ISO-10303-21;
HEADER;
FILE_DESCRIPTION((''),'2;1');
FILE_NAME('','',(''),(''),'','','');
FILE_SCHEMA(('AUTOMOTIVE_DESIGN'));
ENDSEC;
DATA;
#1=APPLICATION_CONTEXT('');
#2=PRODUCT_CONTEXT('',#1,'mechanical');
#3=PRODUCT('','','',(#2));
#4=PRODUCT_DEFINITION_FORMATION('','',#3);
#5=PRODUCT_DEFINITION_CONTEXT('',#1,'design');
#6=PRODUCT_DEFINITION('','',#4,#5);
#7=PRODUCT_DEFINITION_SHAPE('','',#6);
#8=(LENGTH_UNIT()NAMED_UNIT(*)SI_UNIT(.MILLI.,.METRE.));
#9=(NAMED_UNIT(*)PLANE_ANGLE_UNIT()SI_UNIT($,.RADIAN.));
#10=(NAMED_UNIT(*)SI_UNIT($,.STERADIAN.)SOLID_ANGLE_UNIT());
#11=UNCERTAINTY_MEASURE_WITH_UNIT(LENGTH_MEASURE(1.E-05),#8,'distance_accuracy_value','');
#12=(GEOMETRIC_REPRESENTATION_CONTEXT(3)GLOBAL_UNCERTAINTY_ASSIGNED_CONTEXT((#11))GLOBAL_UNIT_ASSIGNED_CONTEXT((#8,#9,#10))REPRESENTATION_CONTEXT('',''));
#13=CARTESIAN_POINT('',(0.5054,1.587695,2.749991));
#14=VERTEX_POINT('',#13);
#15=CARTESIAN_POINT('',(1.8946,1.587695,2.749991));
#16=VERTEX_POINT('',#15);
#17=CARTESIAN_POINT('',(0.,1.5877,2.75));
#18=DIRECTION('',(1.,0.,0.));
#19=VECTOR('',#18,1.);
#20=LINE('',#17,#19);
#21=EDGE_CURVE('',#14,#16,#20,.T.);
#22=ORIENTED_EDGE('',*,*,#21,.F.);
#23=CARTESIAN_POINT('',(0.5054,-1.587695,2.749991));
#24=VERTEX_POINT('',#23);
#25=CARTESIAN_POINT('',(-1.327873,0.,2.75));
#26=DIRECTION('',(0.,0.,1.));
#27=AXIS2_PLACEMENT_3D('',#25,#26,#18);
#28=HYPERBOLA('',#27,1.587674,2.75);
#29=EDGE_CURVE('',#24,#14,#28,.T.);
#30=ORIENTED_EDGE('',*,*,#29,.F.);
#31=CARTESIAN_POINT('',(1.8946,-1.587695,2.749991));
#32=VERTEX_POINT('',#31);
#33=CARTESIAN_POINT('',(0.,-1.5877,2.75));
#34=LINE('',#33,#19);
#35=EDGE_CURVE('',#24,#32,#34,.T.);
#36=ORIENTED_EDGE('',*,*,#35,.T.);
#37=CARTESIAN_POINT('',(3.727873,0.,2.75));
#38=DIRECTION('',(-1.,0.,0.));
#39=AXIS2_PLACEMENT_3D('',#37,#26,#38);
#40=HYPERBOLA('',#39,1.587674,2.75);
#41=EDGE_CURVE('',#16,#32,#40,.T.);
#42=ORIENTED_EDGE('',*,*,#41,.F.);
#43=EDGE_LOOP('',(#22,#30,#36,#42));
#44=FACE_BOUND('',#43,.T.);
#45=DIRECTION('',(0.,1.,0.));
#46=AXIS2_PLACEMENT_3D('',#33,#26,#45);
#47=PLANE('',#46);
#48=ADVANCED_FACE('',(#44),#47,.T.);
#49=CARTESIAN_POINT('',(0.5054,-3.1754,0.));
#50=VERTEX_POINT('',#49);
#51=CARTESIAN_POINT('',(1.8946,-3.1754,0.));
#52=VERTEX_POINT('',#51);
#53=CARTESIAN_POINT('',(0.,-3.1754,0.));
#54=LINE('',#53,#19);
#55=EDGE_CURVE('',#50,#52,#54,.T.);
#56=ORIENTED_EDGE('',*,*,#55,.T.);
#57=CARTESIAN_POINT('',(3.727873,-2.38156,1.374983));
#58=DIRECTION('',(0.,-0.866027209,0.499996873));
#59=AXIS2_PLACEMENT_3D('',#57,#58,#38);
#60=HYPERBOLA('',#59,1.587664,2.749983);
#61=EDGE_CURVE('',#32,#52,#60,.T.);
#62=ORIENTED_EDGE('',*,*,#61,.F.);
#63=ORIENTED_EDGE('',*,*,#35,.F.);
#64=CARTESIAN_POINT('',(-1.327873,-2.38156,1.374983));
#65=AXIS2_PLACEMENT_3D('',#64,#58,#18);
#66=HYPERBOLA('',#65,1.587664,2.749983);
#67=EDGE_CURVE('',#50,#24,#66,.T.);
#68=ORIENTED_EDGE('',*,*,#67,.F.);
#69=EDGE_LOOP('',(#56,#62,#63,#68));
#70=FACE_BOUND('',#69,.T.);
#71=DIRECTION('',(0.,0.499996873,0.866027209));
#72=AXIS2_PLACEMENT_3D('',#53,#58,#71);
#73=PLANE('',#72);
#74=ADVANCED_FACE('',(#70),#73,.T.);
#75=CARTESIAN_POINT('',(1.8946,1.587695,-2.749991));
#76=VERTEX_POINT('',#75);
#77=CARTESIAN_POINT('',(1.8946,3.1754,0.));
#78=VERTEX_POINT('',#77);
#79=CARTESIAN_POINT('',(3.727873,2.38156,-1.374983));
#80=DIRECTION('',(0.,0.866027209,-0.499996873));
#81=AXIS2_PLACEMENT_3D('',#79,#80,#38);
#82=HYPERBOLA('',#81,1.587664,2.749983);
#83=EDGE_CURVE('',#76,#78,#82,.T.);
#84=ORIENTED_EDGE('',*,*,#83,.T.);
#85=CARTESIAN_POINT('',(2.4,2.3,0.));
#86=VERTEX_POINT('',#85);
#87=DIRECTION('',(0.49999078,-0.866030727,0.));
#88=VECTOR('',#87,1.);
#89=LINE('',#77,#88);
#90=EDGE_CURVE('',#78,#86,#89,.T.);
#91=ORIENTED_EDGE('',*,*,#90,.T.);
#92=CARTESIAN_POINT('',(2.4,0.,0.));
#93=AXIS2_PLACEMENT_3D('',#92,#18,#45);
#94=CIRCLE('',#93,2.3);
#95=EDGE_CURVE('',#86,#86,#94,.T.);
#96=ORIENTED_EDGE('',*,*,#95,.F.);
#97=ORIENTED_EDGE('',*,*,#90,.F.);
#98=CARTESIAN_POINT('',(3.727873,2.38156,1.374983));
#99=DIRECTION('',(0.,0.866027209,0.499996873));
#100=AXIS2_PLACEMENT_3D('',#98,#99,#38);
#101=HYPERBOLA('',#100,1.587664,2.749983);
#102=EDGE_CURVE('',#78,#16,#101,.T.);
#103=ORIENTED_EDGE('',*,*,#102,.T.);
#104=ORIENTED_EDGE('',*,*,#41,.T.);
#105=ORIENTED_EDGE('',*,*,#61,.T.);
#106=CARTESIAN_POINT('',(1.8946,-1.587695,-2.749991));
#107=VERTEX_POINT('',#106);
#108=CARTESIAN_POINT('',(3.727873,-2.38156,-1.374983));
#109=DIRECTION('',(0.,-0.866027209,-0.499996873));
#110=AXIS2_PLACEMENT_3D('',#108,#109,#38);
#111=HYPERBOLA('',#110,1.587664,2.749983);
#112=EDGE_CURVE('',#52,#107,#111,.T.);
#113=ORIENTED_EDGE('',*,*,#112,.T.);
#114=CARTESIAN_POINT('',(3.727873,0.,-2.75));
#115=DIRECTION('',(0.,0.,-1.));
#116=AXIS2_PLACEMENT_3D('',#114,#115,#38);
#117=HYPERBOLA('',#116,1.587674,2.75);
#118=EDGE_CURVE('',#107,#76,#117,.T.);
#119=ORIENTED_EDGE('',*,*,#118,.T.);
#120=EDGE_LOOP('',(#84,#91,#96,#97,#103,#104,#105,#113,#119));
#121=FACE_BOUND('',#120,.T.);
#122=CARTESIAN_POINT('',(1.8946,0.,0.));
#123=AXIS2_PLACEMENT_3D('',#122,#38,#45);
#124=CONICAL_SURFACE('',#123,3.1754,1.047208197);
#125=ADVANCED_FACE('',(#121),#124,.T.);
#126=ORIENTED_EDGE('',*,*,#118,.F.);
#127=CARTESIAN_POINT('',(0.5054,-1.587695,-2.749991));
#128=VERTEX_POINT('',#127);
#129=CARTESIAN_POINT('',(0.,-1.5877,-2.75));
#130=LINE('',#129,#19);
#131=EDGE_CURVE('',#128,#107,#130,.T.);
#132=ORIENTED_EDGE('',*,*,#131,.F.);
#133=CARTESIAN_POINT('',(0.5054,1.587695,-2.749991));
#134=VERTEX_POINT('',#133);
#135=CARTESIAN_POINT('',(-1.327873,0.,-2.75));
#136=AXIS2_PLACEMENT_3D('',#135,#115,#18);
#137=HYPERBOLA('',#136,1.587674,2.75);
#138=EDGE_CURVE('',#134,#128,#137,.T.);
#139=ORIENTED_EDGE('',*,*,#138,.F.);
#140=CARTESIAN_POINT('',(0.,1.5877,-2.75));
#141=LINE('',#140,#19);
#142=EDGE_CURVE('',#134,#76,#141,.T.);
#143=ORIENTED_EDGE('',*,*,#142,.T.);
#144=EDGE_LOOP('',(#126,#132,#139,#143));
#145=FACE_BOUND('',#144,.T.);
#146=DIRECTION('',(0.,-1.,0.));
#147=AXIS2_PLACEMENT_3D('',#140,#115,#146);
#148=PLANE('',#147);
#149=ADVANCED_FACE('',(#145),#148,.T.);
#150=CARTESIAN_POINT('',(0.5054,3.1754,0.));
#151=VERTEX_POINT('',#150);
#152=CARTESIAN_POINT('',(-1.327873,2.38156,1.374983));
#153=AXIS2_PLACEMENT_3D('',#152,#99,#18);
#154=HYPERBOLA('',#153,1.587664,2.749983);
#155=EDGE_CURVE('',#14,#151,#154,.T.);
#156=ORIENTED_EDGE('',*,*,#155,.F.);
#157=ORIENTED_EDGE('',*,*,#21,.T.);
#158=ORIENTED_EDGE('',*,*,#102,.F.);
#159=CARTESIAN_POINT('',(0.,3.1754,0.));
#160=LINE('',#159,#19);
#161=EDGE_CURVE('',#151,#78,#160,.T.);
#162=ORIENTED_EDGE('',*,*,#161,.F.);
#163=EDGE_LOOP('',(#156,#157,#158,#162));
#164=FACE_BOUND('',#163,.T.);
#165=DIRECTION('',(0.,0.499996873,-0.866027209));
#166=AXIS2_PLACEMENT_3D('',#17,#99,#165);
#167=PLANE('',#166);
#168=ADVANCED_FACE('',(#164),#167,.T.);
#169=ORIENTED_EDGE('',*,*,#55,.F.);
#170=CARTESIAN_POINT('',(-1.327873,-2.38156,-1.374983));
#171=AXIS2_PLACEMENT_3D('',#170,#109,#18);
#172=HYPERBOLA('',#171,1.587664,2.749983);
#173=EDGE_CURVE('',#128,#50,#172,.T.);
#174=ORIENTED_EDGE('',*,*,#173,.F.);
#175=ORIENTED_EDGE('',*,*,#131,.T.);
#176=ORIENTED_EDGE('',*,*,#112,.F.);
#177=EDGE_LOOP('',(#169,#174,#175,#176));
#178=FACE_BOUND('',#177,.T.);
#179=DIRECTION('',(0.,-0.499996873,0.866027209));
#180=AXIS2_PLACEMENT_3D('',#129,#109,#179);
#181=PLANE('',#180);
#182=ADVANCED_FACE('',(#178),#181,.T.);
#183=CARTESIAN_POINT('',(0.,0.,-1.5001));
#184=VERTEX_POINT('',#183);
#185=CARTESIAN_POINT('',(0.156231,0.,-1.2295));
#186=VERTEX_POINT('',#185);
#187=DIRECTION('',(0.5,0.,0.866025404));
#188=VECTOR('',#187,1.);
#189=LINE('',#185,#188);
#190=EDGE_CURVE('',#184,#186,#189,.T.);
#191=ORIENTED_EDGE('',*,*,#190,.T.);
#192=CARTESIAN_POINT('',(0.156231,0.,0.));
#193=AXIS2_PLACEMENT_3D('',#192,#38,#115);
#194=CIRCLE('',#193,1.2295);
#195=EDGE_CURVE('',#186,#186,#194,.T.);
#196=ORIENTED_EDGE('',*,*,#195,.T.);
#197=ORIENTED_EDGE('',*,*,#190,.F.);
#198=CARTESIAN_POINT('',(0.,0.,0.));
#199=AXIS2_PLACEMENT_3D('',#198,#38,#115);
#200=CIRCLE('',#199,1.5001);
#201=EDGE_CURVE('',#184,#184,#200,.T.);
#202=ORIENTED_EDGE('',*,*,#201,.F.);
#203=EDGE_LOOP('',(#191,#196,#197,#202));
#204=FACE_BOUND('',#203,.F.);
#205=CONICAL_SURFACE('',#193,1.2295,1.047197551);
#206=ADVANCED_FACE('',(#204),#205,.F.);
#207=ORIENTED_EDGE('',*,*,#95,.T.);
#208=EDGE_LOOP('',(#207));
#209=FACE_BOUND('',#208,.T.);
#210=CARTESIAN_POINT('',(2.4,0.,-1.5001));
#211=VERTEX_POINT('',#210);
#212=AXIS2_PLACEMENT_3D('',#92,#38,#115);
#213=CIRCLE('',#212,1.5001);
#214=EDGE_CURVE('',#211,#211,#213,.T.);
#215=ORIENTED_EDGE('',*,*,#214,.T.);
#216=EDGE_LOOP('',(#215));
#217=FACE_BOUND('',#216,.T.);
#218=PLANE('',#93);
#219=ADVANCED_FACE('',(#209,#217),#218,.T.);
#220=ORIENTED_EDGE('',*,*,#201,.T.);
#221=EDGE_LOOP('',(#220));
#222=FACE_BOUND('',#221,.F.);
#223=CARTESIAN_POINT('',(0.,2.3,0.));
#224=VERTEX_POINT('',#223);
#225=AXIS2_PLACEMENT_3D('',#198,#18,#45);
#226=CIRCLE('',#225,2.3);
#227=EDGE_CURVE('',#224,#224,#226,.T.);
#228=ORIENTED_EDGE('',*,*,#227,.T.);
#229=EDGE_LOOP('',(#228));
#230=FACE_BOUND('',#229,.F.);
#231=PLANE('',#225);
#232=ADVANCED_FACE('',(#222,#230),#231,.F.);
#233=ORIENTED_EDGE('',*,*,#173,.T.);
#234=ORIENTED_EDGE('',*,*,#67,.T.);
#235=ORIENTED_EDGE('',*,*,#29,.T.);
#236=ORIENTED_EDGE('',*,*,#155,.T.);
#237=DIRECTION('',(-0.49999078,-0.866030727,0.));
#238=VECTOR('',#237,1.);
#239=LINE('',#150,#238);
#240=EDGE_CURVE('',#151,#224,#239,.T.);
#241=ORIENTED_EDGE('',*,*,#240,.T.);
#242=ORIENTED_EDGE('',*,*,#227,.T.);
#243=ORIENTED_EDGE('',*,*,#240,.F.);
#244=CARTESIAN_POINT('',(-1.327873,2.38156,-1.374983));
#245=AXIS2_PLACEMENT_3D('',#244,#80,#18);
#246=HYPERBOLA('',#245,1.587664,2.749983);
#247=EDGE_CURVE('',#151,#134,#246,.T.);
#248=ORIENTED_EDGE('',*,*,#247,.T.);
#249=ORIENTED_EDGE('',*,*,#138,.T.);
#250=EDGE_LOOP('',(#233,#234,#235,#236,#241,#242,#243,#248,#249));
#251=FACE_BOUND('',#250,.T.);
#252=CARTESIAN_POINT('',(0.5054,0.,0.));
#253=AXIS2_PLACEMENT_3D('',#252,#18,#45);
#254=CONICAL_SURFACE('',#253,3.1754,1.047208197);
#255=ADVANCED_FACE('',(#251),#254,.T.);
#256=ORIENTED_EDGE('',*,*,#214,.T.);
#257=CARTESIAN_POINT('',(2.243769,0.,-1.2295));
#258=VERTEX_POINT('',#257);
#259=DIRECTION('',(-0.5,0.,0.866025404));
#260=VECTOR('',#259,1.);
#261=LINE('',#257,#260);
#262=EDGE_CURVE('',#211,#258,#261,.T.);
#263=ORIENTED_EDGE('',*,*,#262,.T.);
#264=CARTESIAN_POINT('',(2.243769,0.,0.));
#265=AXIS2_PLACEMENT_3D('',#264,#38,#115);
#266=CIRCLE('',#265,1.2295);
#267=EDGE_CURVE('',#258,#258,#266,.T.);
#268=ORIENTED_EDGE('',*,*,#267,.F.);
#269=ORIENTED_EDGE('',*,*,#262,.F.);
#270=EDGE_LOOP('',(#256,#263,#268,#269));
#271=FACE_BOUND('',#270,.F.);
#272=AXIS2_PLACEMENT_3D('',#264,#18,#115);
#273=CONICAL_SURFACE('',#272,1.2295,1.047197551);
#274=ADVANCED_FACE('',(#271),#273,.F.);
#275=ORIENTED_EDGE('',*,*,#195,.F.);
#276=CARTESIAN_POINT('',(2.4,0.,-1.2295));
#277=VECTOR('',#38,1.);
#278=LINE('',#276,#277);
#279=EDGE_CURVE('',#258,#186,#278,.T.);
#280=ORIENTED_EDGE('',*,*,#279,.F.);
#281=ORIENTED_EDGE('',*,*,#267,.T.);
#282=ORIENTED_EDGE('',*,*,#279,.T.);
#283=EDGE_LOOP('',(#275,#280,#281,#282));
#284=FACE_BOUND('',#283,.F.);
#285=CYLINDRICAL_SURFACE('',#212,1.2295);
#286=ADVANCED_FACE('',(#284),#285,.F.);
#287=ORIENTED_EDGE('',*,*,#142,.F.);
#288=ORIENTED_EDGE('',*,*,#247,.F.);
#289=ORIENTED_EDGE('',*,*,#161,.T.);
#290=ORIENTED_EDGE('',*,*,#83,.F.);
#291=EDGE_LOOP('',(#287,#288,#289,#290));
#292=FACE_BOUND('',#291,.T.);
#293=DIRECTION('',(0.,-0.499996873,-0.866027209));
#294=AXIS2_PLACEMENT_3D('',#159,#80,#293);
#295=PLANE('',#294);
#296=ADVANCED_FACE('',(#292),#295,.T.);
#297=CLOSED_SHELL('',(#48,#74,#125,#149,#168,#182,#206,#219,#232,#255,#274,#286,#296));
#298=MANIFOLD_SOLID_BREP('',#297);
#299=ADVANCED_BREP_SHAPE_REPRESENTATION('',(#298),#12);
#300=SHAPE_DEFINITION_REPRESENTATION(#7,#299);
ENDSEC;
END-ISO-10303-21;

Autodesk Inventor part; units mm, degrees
ref_plane "YZ Plane" through (0, 0, 0) normal (1, 0, 0) x (0, 1, 0)
ref_plane "XZ Plane" through (0, 0, 0) normal (0, 1, 0) x (-1, 0, 0)
sketch "Sketch1" plane through (0, 0, 0) normal (1, 0, 0) x (0, 1, 0)
  line L0 (-3.1754, 0) -> (-1.5877, 2.75)
  line L1 (-1.5877, 2.75) -> (1.5877, 2.75)
  line L2 (1.5877, 2.75) -> (3.1754, 0)
  line L3 (3.1754, 0) -> (1.5877, -2.75)
  line L4 (1.5877, -2.75) -> (-1.5877, -2.75)
  line L5 (-1.5877, -2.75) -> (-3.1754, 0)
  point P0 (0, 0)
  point P1 (0, 0)
  dimension "d0" = 6.3509
extrude "Body" add sketch "Sketch1" along normal blind 2.4
sketch "Sketch2" plane through (0, 0, 0) normal (0, 0, 1) x (1, 0, 0)
  line L0 (0, 1.5877) -> (0, 3.1754) projected
  line L1 (0, 3.1754) -> (2.4, 3.1754) projected
  line L2 (2.4, 1.5877) -> (2.4, 3.1754) projected
  line L3 (-0.48, 0) -> (2.88, 0) projected
  line L4 (0.5054, 3.1754) -> (0, 2.3)
  line L5 (1.8946, 3.1754) -> (2.4, 2.3)
  dimension "d3" = 30
  dimension "d4" = 30
  dimension "d5" = 4.6
  dimension "d6" = 4.6
revolve "Chamfer1" cut sketch "Sketch2" angle 360 about axis through (-10, 0, 0) along (1, 0, 0)
sketch "Sketch3" plane through (2.4, 0, 0) normal (1, 0, 0) x (0, 0, -1)
  arc A0 (-0.625, -1.0825) -> (0.625, -1.0825) centre (0, 0) ccw projected
hole "Thread" at (2.4, 0, 0) direction (-1, 0, 0) diameter 2.459 end through all thread size "M3x0.5" class "6H" standard "ISO Metric profile"
chamfer "Chamfer2" distance 0.2706 angle 30 1 edges at (2.4, 0, 1.2295) measured on face at (2.4, 1.9179, -0.2329)
chamfer "Chamfer3" distance 0.2706 angle 30 1 edges at (0, 0, 1.2295) measured on face at (0, 1.9179, -0.2329)
ref_plane "Work Plane1" through (-6.3375, 0, 0) normal (0, -0.8660254, -0.5) x (1, 0, 0)
equation "\"d0\" = 1.1547 * SW"
equation "\"d1\" = KOH"
equation "\"d3\" = ANG1"
equation "\"d4\" = ANG2"
equation "\"d5\" = SW0"
equation "\"d6\" = SW01"
equation "\"d8\" = -0.5 * GD1 + 0.5 * NND"
equation "\"d40\" = -0.5 * GD1 + 0.5 * NND"
equation "\"d10\" = -0.5 * GD1 + 0.5 * NND"
equation "\"d41\" = -0.5 * GD1 + 0.5 * NND"
equation "\"ANG1\" = 30deg"
equation "\"ANG2\" = 30deg"
equation "\"NND\" = 3"
equation "\"KOH\" = 2.4"
equation "\"SW\" = 5.5"
equation "\"SW0\" = 4.6"
equation "\"SW01\" = SW0"
equation "\"GUL\" = 0.541266 * PTC"
equation "\"THREADDIA\" = 3"
equation "\"TOA\" = 30deg"
equation "\"PTC\" = 0.5"
equation "\"E0\" = 1.155 * SW"
equation "\"GAL\" = 0.541266 * PTC"
equation "\"GD1\" = 2.458734"
properties part number "M3 Hex Nut" material "Stainless Steel, 440C"
